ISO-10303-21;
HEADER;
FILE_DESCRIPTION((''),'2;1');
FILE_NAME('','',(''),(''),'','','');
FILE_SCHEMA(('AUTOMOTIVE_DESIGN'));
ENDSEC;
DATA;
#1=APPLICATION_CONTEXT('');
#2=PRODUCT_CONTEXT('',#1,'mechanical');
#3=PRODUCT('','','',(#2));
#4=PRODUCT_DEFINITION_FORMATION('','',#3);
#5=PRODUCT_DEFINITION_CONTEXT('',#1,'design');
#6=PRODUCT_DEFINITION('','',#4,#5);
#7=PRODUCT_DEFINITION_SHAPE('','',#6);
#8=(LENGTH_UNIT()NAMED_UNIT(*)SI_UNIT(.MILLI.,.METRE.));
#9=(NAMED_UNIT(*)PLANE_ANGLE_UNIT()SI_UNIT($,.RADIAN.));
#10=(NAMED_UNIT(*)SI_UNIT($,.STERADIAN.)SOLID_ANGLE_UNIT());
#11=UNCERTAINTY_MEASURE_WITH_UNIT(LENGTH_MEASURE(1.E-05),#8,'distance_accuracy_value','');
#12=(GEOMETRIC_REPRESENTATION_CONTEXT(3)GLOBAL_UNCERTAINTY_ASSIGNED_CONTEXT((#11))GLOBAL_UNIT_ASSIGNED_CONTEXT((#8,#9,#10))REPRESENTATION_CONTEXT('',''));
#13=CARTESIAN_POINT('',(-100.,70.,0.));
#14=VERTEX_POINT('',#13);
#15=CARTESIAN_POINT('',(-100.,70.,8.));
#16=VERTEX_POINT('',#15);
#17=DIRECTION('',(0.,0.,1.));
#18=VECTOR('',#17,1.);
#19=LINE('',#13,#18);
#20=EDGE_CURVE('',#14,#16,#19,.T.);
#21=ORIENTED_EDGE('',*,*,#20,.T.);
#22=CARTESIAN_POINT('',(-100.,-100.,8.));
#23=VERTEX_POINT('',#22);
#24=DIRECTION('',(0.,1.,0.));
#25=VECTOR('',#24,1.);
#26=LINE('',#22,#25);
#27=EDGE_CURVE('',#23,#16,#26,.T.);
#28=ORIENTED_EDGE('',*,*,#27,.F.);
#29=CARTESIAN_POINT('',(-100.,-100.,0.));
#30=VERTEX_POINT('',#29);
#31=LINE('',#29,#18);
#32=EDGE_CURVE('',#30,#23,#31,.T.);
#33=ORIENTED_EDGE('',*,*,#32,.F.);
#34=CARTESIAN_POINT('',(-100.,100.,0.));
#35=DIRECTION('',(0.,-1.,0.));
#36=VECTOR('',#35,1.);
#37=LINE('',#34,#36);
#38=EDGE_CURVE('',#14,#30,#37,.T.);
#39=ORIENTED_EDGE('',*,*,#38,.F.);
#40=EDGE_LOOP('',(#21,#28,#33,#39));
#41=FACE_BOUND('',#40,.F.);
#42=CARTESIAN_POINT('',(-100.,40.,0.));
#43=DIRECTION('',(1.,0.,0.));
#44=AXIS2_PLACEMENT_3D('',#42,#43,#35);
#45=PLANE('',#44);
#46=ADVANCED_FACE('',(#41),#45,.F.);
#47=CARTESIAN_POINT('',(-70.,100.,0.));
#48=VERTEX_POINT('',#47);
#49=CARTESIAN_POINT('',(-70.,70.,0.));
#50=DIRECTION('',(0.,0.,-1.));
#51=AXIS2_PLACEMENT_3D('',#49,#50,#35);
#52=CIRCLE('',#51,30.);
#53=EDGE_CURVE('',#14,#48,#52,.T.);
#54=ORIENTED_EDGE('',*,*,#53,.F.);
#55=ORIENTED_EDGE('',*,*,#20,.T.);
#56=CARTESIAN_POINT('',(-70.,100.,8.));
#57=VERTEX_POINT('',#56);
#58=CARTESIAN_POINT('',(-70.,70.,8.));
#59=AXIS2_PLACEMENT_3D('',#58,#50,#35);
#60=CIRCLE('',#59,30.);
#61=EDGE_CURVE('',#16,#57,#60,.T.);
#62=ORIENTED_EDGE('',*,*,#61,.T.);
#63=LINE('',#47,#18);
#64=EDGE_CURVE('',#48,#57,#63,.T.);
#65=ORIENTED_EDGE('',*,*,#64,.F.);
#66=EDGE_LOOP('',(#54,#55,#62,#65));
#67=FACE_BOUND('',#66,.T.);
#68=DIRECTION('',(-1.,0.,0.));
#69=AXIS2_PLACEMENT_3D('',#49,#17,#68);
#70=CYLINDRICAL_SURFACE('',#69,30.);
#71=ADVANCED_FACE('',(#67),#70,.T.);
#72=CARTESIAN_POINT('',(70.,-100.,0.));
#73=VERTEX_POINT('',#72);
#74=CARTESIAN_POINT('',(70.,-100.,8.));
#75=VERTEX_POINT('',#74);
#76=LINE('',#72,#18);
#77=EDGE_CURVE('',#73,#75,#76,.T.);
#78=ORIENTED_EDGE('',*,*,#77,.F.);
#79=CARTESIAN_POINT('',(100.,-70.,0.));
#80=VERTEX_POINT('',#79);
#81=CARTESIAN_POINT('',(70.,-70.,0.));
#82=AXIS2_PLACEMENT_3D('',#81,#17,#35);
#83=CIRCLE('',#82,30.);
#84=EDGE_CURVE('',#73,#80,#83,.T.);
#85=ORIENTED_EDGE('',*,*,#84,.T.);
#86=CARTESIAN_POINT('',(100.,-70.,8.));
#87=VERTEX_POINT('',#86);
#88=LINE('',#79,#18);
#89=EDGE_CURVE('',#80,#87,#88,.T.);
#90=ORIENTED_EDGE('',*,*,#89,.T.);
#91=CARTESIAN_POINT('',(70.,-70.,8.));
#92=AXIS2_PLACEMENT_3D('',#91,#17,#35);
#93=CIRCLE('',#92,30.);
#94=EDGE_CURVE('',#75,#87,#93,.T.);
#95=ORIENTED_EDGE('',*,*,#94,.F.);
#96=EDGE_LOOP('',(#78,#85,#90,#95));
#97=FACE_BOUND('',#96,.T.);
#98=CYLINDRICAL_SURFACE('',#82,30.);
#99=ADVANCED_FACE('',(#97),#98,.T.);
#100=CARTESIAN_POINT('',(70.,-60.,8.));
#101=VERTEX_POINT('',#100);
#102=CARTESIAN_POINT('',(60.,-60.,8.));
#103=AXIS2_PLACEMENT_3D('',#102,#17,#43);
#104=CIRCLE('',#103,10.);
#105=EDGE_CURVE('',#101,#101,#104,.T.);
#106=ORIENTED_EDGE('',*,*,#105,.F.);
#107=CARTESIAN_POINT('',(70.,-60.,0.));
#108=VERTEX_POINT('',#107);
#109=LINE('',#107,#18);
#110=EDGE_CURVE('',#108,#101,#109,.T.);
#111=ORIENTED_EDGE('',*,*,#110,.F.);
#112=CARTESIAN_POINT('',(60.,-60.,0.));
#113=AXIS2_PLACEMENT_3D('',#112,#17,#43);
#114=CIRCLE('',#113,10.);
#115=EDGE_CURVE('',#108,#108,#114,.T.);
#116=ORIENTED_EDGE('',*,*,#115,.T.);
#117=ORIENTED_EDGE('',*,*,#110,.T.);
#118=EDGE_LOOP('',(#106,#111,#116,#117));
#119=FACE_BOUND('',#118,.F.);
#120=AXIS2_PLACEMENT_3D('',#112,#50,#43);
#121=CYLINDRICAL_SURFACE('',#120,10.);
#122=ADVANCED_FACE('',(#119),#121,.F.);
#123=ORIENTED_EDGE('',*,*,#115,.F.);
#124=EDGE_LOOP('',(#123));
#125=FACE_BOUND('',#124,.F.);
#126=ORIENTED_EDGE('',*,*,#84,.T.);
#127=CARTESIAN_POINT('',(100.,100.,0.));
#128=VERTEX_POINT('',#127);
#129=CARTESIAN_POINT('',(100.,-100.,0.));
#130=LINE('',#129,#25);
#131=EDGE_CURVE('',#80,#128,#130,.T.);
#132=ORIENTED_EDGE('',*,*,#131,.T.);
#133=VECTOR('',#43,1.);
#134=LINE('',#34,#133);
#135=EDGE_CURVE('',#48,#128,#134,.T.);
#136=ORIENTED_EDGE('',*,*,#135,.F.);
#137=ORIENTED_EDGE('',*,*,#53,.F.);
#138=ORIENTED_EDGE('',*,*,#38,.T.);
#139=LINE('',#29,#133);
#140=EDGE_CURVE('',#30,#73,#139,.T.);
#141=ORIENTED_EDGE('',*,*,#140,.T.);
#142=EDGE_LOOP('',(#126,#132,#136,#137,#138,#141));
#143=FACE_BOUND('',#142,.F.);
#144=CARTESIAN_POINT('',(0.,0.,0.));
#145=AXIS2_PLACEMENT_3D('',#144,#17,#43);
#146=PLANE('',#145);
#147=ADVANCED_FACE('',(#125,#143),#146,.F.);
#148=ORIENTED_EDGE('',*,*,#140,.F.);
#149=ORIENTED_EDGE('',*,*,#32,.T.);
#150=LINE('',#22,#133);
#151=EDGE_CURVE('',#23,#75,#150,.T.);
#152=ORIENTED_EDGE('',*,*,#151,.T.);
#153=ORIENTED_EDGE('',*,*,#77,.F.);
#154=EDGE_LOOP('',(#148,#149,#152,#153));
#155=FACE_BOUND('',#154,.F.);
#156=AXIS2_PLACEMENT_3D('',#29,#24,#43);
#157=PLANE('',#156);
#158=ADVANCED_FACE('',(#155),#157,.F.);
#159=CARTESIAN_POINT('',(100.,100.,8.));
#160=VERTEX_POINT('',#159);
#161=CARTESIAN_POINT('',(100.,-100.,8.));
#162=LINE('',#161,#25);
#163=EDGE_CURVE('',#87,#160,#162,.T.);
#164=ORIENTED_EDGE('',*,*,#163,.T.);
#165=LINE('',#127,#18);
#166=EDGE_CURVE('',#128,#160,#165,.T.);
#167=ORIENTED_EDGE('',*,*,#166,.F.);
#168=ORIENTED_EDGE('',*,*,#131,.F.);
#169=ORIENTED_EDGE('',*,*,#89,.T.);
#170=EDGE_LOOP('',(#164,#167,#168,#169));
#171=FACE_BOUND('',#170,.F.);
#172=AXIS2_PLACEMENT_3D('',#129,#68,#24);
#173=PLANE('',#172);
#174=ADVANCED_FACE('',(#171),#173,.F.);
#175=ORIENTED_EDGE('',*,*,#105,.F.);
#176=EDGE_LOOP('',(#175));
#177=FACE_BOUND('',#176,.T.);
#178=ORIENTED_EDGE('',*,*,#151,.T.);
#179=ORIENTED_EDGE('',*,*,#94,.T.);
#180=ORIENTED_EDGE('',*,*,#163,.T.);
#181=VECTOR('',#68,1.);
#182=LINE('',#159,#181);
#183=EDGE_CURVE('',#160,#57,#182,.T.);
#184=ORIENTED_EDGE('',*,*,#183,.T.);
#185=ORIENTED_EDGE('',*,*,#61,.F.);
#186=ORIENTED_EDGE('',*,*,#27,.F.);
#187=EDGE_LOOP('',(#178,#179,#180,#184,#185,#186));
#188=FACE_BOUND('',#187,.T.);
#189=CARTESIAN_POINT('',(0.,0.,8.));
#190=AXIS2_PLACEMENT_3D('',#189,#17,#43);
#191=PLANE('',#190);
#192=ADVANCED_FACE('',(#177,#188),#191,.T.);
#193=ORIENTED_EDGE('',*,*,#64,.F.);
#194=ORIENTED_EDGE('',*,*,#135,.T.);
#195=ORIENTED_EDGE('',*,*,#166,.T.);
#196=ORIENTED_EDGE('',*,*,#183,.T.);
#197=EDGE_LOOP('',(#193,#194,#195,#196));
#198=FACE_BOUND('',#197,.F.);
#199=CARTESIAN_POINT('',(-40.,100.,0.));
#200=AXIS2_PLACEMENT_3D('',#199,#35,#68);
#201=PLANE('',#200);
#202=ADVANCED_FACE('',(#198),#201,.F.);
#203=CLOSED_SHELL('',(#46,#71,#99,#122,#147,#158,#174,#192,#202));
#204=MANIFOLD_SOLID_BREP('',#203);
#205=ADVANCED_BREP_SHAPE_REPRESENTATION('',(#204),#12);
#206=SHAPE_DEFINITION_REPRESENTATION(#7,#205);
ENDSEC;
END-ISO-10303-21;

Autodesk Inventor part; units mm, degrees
ref_plane "YZ Plane" through (0, 0, 0) normal (1, 0, 0) x (0, 1, 0)
ref_plane "XZ Plane" through (0, 0, 0) normal (0, 1, 0) x (-1, 0, 0)
ref_plane "XY Plane" through (0, 0, 0) normal (0, 0, 1) x (1, 0, 0)
sketch "Sketch1" plane through (0, 0, 0) normal (0, 0, 1) x (1, 0, 0)
  line L0 (-100, -100) -> (100, -100)
  line L1 (100, -100) -> (100, 100)
  line L2 (100, 100) -> (-100, 100)
  line L3 (-100, 100) -> (-100, -100)
  line L4 (-100, -100) -> (100, 100) construction
  line L5 (100, -100) -> (-100, 100) construction
  circle A0 centre (60, -60) radius 10
  line L6 (-40, 100) -> (-40, 40)
  line L7 (-40, 40) -> (-100, 40)
  point P0 (0, 0)
  dimension "d154" = 200
  dimension "d155" = 200
  dimension "d157" = 20
  dimension "d158" = 40
  dimension "d159" = 40
  dimension "d161" = 60
extrude "Plate5" add sketch "Sketch1" along normal blind 8
fillet "Corner Round1" radius 30 2 edges at (100, -100, 4) (-100, 100, 4)
properties part number "PNS-071 stretch ring" material "Stainless Steel"
